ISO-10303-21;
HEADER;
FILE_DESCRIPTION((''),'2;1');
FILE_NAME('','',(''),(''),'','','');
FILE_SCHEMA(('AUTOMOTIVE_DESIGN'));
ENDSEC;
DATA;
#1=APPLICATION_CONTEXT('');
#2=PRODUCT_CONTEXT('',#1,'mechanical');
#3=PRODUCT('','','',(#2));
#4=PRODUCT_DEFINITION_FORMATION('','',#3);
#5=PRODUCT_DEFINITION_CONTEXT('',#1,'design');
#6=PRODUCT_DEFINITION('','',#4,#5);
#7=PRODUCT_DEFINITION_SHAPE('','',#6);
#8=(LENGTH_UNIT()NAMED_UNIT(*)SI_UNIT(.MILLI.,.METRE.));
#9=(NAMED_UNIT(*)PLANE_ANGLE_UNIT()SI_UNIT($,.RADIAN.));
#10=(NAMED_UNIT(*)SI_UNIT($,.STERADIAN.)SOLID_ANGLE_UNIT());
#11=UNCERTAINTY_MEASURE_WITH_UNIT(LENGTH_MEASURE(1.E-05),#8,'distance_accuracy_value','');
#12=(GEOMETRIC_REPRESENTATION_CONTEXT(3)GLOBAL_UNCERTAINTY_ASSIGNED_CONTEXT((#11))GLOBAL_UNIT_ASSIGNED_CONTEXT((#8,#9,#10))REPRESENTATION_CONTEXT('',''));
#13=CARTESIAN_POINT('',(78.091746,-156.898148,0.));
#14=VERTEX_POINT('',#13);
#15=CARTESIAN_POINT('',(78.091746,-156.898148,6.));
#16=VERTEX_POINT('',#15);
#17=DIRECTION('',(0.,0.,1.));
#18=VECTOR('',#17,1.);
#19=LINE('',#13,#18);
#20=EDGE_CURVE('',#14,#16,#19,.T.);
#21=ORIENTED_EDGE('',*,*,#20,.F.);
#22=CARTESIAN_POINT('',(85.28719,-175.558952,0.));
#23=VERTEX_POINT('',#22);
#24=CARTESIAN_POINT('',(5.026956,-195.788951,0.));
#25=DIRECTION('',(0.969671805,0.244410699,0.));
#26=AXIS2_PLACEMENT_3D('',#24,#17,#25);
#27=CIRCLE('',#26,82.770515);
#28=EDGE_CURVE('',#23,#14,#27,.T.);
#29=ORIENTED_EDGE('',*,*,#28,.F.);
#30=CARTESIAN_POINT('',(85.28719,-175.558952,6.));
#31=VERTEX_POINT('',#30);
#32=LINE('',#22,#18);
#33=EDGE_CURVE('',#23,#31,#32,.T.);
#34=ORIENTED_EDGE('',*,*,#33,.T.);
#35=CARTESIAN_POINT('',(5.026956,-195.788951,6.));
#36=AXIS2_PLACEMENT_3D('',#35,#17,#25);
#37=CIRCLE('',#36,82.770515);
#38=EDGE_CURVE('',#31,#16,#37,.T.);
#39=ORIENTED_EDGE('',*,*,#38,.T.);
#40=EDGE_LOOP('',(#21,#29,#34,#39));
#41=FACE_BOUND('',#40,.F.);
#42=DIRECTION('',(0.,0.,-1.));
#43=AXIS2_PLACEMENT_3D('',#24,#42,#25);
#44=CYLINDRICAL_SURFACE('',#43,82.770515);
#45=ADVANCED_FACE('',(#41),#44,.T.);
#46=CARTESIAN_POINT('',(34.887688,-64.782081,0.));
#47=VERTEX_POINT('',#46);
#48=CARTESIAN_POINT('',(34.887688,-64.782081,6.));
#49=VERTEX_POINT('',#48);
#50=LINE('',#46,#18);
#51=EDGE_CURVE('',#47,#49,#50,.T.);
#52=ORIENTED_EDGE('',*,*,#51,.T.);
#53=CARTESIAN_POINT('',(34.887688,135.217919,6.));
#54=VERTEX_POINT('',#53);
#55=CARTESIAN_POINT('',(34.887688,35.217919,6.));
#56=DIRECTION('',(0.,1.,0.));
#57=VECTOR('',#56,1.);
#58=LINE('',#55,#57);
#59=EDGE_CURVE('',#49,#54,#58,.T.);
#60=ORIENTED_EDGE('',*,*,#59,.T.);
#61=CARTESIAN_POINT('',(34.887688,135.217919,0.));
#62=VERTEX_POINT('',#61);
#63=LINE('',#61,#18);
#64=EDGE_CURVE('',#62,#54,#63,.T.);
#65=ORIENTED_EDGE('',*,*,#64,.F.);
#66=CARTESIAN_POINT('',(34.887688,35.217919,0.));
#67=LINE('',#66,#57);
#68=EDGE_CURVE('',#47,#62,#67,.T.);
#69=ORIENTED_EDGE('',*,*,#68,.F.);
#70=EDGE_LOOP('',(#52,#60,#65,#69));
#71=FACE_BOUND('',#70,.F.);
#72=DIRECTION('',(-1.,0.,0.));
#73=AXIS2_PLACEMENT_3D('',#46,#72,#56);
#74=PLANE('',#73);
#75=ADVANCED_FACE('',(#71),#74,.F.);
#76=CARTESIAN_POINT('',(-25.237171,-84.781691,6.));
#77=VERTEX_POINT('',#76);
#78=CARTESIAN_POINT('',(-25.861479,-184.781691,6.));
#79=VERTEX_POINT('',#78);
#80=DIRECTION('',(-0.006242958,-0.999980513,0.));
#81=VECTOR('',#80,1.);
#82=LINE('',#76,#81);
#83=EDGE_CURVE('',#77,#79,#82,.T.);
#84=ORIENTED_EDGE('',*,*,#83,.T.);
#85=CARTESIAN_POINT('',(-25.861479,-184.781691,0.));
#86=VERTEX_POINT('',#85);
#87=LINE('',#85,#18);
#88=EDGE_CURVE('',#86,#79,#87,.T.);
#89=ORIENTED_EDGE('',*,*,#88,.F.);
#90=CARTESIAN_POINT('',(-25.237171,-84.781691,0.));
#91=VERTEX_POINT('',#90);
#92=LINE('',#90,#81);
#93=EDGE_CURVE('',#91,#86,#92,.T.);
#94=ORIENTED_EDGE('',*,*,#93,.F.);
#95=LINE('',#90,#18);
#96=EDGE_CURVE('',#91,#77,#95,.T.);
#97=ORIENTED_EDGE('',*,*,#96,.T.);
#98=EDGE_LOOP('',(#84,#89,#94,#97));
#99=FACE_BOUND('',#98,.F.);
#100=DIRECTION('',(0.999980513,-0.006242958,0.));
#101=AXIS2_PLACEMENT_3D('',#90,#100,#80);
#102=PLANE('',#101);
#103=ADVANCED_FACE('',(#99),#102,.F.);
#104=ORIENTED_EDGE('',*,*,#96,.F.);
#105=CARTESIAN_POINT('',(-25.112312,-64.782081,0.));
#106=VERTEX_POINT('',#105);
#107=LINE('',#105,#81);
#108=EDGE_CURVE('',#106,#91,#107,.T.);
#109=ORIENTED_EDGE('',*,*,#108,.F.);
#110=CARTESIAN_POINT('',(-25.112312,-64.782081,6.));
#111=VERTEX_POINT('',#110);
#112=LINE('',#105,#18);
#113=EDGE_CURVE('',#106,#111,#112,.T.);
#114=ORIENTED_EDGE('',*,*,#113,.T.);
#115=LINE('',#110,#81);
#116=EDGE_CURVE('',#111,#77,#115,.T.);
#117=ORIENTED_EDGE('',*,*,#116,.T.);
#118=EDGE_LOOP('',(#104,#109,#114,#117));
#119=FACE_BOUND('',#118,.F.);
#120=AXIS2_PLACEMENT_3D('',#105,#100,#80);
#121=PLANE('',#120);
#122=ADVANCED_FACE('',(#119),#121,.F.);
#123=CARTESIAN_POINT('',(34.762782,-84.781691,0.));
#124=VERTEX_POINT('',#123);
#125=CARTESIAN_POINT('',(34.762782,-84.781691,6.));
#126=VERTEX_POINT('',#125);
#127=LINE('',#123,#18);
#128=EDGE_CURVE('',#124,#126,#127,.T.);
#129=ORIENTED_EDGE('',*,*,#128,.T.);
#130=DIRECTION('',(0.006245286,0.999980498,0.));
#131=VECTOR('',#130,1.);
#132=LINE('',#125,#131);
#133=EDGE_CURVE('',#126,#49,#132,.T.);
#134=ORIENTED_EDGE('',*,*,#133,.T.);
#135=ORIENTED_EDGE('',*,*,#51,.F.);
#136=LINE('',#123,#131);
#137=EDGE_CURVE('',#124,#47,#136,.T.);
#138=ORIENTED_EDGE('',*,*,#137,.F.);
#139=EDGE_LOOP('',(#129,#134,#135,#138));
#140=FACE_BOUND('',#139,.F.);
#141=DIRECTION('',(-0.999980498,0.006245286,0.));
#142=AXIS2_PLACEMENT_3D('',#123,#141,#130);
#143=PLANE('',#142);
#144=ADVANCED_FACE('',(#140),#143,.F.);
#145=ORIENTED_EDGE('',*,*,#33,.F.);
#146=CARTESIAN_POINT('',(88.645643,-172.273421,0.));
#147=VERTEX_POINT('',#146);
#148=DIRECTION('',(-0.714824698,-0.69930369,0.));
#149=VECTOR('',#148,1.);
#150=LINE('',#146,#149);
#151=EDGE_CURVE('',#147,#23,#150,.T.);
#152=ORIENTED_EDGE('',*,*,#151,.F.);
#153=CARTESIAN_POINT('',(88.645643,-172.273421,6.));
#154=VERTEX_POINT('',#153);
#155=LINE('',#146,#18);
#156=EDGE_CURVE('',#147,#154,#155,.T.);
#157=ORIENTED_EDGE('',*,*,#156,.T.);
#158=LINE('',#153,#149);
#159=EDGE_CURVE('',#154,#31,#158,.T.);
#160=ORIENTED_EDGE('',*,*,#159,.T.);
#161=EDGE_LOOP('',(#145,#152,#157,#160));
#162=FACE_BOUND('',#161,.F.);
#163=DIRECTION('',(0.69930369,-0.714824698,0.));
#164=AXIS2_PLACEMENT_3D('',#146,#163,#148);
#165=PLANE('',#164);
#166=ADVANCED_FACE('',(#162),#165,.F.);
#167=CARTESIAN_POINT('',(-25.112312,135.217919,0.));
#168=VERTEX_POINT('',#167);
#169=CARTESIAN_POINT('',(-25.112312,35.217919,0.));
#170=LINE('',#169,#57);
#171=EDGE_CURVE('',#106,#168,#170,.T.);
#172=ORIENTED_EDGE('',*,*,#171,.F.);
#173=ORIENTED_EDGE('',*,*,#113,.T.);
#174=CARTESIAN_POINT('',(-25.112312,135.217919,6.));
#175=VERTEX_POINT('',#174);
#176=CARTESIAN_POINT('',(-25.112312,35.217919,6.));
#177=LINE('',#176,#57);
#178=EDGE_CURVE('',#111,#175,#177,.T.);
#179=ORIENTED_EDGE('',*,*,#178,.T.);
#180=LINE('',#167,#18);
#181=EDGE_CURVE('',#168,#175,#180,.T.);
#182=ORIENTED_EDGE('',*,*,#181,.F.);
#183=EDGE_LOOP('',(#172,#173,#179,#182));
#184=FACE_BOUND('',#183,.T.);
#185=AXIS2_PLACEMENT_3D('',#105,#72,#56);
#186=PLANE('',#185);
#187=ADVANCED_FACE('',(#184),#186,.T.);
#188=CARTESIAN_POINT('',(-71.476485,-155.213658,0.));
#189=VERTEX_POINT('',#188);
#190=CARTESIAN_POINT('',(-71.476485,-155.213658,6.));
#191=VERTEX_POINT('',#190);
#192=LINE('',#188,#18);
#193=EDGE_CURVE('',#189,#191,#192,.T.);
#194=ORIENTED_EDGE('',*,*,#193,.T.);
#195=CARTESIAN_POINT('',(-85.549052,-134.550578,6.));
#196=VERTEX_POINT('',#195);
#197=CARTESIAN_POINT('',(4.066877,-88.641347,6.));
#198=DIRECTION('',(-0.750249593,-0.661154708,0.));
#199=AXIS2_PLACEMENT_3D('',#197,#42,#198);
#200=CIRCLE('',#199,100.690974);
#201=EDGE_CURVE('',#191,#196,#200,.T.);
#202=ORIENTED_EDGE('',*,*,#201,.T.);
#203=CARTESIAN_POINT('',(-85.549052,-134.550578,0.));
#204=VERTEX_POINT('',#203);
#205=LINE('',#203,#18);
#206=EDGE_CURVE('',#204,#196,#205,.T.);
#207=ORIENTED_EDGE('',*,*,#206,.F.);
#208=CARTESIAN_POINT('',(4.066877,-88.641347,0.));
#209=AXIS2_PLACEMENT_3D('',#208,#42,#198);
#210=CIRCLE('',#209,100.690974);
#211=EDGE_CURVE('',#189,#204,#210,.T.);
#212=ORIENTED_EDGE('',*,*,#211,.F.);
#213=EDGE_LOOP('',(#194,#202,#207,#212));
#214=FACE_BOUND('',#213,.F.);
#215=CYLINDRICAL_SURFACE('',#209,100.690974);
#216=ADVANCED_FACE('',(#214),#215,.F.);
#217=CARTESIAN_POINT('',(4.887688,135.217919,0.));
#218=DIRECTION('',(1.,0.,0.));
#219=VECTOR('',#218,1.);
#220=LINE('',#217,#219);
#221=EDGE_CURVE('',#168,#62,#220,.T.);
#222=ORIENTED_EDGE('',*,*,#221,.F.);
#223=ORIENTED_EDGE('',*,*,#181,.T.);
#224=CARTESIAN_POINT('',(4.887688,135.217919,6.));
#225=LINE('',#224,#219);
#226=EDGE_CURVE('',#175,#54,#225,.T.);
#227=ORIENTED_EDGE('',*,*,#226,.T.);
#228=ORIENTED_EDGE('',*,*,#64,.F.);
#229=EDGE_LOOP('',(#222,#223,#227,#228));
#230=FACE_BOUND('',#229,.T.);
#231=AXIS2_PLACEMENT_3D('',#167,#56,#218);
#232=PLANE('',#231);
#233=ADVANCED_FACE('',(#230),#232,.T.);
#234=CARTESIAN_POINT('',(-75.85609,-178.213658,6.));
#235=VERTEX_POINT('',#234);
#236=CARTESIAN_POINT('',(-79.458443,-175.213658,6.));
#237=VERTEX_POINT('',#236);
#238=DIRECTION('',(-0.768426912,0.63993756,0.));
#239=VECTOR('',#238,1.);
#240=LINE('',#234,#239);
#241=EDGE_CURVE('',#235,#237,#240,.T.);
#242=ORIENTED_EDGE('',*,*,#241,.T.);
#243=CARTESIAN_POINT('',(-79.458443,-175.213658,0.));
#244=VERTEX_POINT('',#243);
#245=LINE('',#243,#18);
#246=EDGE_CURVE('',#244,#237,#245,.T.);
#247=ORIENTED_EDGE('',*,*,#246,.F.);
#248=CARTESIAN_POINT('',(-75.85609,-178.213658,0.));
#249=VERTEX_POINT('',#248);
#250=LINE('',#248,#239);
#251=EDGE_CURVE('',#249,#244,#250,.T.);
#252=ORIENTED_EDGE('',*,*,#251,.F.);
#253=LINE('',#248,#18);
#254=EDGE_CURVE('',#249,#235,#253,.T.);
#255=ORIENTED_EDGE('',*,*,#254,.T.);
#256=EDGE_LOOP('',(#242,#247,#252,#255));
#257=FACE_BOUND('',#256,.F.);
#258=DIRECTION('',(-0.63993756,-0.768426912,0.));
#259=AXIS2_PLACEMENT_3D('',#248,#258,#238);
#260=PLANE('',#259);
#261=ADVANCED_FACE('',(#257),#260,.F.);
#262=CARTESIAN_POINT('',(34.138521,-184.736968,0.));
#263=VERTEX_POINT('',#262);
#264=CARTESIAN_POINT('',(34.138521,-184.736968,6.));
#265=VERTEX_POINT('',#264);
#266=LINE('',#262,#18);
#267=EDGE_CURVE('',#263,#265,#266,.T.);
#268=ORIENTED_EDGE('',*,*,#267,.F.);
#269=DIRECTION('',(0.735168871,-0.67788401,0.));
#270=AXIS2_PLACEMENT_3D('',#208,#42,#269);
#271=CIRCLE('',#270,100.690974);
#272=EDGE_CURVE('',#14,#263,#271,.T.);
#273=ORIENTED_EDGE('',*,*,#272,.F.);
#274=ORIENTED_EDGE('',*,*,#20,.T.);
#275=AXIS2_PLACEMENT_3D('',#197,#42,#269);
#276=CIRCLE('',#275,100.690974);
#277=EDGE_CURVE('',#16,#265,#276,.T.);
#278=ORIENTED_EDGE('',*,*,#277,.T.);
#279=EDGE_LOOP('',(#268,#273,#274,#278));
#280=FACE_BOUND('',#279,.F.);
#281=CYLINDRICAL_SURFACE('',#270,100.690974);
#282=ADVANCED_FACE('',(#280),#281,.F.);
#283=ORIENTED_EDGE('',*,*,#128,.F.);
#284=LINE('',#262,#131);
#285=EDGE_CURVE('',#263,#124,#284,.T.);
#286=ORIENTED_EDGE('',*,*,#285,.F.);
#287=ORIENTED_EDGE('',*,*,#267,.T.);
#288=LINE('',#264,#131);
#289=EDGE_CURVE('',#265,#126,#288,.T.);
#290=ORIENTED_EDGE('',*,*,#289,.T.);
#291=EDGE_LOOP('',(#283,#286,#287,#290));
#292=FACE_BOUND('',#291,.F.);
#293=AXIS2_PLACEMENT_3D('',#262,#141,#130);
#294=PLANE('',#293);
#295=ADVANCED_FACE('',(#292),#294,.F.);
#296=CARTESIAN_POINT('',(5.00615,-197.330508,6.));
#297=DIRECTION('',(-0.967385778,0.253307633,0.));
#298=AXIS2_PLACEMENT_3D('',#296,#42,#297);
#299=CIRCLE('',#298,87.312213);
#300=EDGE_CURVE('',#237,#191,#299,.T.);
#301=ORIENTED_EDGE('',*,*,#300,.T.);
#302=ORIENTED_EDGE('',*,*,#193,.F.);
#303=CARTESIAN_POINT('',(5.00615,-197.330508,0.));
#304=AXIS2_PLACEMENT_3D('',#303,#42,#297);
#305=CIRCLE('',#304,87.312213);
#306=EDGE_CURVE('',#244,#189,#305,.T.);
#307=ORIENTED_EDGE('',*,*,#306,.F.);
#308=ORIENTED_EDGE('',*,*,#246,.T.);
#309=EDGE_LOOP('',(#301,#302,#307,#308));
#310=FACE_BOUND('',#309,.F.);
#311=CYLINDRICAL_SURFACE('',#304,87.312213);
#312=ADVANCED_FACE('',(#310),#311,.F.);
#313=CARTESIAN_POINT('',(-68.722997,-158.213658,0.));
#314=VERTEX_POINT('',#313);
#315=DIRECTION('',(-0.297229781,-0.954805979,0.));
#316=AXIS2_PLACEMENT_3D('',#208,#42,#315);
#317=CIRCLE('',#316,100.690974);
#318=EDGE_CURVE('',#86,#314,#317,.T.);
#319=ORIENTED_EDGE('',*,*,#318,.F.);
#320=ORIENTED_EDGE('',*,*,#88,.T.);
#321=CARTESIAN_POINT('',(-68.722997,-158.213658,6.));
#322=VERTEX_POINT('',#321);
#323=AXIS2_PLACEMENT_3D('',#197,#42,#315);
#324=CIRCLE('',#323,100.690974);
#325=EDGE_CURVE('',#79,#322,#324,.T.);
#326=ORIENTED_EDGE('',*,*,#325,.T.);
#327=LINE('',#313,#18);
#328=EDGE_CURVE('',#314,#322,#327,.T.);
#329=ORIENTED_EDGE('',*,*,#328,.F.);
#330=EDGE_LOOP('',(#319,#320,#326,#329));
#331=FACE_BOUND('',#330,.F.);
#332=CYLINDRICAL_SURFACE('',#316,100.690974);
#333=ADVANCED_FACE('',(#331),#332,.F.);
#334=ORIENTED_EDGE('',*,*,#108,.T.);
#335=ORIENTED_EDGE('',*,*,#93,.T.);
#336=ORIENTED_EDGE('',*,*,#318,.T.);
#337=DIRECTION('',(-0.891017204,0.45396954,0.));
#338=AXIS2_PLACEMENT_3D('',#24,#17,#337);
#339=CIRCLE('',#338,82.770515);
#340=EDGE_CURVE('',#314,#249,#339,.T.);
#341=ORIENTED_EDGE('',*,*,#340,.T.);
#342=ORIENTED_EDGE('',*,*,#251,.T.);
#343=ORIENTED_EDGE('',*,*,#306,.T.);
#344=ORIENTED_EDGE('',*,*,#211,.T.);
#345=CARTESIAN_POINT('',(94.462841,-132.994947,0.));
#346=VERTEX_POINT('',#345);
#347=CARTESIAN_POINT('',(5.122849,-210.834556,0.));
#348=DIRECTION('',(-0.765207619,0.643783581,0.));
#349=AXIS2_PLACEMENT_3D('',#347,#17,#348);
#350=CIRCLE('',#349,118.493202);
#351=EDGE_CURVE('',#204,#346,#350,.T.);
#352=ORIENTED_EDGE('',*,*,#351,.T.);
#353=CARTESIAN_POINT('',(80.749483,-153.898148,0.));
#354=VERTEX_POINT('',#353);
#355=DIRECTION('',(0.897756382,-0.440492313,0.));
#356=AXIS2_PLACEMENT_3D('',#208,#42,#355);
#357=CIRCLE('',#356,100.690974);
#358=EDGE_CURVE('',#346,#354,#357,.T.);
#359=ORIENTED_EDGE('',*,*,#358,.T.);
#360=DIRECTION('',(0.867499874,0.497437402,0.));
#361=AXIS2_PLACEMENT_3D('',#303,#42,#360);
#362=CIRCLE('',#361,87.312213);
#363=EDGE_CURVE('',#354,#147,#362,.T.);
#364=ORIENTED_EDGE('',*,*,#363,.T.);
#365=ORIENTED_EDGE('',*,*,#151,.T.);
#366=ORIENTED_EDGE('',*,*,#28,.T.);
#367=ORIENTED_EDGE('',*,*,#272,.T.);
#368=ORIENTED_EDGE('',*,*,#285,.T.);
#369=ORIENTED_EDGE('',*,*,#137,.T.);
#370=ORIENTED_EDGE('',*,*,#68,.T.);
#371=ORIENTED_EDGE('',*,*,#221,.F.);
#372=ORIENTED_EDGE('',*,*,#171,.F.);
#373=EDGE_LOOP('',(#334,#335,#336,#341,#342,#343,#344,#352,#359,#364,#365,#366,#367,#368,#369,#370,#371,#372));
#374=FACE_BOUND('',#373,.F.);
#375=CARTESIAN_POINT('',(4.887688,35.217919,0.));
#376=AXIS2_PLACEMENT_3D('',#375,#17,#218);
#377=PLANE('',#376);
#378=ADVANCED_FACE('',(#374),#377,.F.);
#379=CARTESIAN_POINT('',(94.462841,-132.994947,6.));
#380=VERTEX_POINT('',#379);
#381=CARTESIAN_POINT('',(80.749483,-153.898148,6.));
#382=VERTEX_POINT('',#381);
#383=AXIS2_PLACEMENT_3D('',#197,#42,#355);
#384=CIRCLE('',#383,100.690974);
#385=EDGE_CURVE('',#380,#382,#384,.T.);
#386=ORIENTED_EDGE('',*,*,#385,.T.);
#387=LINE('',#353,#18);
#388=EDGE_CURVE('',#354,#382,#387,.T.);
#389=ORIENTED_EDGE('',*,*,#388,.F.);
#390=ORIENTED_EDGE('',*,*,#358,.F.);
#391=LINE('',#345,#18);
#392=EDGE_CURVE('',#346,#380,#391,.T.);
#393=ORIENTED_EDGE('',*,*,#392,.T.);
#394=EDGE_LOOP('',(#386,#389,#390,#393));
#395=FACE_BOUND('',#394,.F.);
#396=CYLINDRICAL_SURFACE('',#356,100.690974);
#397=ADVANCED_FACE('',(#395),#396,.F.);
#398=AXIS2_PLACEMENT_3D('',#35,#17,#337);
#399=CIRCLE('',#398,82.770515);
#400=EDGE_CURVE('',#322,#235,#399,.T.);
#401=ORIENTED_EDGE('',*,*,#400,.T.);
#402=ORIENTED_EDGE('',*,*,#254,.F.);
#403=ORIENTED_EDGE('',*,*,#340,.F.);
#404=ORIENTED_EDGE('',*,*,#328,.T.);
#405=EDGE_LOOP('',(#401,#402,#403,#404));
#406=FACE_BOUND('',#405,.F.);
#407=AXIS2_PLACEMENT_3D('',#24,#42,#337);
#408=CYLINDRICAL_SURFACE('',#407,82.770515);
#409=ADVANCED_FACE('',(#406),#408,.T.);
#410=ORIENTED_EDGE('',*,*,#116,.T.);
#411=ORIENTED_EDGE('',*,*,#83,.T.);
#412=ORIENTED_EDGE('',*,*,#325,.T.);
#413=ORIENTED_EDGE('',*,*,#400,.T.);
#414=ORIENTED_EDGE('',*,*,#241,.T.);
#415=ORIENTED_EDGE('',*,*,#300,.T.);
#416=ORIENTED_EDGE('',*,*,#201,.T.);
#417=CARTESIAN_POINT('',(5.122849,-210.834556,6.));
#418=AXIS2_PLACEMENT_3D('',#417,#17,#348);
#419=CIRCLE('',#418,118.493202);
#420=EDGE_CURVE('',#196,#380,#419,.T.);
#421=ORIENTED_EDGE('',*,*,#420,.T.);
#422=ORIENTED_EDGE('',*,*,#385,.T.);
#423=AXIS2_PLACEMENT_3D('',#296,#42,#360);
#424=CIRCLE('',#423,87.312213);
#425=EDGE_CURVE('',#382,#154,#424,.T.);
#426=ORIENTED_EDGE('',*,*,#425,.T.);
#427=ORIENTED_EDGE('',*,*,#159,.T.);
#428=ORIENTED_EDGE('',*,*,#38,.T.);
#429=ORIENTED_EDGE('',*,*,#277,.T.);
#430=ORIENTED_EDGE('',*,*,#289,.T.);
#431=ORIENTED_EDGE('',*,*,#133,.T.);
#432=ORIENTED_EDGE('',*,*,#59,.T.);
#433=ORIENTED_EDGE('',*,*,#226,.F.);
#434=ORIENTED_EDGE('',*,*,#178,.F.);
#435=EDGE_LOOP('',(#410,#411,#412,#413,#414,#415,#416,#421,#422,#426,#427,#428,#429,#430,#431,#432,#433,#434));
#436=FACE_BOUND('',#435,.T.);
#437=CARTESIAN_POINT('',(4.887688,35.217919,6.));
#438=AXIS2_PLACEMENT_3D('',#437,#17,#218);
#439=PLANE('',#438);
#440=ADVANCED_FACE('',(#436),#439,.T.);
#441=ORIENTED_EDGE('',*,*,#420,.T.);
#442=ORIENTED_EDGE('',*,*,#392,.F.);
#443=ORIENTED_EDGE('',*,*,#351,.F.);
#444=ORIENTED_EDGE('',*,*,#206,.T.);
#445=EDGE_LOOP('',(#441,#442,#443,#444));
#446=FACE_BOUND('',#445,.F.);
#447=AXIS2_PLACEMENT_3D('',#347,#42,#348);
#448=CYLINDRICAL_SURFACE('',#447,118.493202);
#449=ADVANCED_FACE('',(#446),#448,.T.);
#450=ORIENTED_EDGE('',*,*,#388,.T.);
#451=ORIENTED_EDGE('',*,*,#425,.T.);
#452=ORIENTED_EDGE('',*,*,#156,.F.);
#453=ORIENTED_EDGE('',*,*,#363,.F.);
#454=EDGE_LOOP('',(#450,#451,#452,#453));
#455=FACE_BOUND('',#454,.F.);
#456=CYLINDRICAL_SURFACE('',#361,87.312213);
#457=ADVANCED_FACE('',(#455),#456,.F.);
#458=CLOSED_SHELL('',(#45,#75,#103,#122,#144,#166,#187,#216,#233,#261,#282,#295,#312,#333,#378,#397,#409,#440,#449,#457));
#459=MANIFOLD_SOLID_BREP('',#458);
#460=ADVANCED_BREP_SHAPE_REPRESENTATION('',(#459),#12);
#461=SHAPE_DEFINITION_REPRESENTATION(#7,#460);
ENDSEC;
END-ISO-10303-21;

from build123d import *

# Parameters (mm, degrees)
F0_W     = 60
F0_H     = 200
F1_DEPTH = 6


# Not quite as in the source:
# - the program builds the solid bodies; features that only make, move or delete a surface that nothing else refers to are left out


with BuildPart() as f1:
    # F0 (on Top) → F1 (new body)
    with BuildSketch(Plane.XY):
        with Locations((4.8876879096, 35.2179194741)):
            Rectangle(F0_W, F0_H)
        with BuildLine():
            ThreePointArc((-79.4584430704, -175.2136584167), (-76.086405566, -164.9666401832), (-71.4764851469, -155.2136584167))
            ThreePointArc((-71.4764851469, -155.2136584167), (-79.1565485083, -145.3205641479), (-85.5490516624, -134.5505784994))
            ThreePointArc((-85.5490516624, -134.5505784994), (6.1468085688, -329.3233337338), (94.4628409087, -132.9949471034))
            ThreePointArc((94.4628409087, -132.9949471034), (88.2574232589, -143.8738017875), (80.7494829473, -153.8981481364))
            ThreePointArc((80.7494829473, -153.8981481364), (85.2254366965, -162.8589485125), (88.6456429035, -172.2734211397))
            ThreePointArc((88.6456429035, -172.2734211397), (75.2367314586, -249.2062042963), (5.6459887203, -284.6403764396))
            ThreePointArc((5.6459887203, -284.6403764396), (-63.9155377146, -250.9329661403), (-79.4584430704, -175.2136584167))
        make_face()
        with BuildLine():
            ThreePointArc((4.8876879096, -189.3289751767), (-10.6634233248, -188.2490297182), (-25.8614792361, -184.7816907769))
            ThreePointArc((-25.8614792361, -184.7816907769), (-48.9823809676, -174.2243385437), (-68.7229965841, -158.2136584167))
            ThreePointArc((-68.7229965841, -158.2136584167), (-72.9335538665, -167.9839691049), (-75.8560904631, -178.2136584167))
            ThreePointArc((-75.8560904631, -178.2136584167), (-59.2361153237, -247.9542245013), (5.5975931326, -278.5574984969))
            Line((5.5975931326, -278.5574984969), (4.8876879096, -189.3289751767))
        make_face()
        with BuildLine():
            ThreePointArc((78.0917461365, -156.8981481364), (57.9442467877, -173.7054474984), (34.1385207639, -184.7369682609))
            ThreePointArc((34.1385207639, -184.7369682609), (19.6828166371, -188.1140297879), (4.8876879096, -189.3289751767))
            Line((4.8876879096, -189.3289751767), (5.5975931326, -278.5574984969))
            ThreePointArc((5.5975931326, -278.5574984969), (70.4913174106, -246.4384867175), (85.2871903638, -175.5589515052))
            ThreePointArc((85.2871903638, -175.5589515052), (82.255170922, -166.010419768), (78.0917461365, -156.8981481364))
        make_face()
        with BuildLine():
            ThreePointArc((5.5975931326, -278.5574984969), (-59.2361153237, -247.9542245013), (-75.8560904631, -178.2136584167))
            Line((-75.8560904631, -178.2136584167), (-79.4584430704, -175.2136584167))
            ThreePointArc((-79.4584430704, -175.2136584167), (-63.9155377146, -250.9329661403), (5.6459887203, -284.6403764396))
            Line((5.6459887203, -284.6403764396), (5.5975931326, -278.5574984969))
        make_face()
        with BuildLine():
            ThreePointArc((85.2871903638, -175.5589515052), (70.4913174106, -246.4384867175), (5.5975931326, -278.5574984969))
            Line((5.5975931326, -278.5574984969), (5.6459887203, -284.6403764396))
            ThreePointArc((5.6459887203, -284.6403764396), (75.2367314586, -249.2062042963), (88.6456429035, -172.2734211397))
            Line((88.6456429035, -172.2734211397), (85.2871903638, -175.5589515052))
        make_face()
        with BuildLine():
            Line((34.7627821954, -84.7816907769), (-25.2371712536, -84.7816907769))
            Line((-25.2371712536, -84.7816907769), (-25.8614792361, -184.7816907769))
            ThreePointArc((-25.8614792361, -184.7816907769), (-10.6634233248, -188.2490297182), (4.8876879096, -189.3289751767))
            ThreePointArc((4.8876879096, -189.3289751767), (19.6828166371, -188.1140297879), (34.1385207639, -184.7369682609))
            Line((34.1385207639, -184.7369682609), (34.7627821954, -84.7816907769))
        make_face()
        Polygon((34.8876879096, -64.7820805259), (-25.1123120904, -64.7820805259), (-25.2371712536, -84.7816907769), (34.7627821954, -84.7816907769), align=None)
    extrude(amount=F1_DEPTH)


solid = f1.part
